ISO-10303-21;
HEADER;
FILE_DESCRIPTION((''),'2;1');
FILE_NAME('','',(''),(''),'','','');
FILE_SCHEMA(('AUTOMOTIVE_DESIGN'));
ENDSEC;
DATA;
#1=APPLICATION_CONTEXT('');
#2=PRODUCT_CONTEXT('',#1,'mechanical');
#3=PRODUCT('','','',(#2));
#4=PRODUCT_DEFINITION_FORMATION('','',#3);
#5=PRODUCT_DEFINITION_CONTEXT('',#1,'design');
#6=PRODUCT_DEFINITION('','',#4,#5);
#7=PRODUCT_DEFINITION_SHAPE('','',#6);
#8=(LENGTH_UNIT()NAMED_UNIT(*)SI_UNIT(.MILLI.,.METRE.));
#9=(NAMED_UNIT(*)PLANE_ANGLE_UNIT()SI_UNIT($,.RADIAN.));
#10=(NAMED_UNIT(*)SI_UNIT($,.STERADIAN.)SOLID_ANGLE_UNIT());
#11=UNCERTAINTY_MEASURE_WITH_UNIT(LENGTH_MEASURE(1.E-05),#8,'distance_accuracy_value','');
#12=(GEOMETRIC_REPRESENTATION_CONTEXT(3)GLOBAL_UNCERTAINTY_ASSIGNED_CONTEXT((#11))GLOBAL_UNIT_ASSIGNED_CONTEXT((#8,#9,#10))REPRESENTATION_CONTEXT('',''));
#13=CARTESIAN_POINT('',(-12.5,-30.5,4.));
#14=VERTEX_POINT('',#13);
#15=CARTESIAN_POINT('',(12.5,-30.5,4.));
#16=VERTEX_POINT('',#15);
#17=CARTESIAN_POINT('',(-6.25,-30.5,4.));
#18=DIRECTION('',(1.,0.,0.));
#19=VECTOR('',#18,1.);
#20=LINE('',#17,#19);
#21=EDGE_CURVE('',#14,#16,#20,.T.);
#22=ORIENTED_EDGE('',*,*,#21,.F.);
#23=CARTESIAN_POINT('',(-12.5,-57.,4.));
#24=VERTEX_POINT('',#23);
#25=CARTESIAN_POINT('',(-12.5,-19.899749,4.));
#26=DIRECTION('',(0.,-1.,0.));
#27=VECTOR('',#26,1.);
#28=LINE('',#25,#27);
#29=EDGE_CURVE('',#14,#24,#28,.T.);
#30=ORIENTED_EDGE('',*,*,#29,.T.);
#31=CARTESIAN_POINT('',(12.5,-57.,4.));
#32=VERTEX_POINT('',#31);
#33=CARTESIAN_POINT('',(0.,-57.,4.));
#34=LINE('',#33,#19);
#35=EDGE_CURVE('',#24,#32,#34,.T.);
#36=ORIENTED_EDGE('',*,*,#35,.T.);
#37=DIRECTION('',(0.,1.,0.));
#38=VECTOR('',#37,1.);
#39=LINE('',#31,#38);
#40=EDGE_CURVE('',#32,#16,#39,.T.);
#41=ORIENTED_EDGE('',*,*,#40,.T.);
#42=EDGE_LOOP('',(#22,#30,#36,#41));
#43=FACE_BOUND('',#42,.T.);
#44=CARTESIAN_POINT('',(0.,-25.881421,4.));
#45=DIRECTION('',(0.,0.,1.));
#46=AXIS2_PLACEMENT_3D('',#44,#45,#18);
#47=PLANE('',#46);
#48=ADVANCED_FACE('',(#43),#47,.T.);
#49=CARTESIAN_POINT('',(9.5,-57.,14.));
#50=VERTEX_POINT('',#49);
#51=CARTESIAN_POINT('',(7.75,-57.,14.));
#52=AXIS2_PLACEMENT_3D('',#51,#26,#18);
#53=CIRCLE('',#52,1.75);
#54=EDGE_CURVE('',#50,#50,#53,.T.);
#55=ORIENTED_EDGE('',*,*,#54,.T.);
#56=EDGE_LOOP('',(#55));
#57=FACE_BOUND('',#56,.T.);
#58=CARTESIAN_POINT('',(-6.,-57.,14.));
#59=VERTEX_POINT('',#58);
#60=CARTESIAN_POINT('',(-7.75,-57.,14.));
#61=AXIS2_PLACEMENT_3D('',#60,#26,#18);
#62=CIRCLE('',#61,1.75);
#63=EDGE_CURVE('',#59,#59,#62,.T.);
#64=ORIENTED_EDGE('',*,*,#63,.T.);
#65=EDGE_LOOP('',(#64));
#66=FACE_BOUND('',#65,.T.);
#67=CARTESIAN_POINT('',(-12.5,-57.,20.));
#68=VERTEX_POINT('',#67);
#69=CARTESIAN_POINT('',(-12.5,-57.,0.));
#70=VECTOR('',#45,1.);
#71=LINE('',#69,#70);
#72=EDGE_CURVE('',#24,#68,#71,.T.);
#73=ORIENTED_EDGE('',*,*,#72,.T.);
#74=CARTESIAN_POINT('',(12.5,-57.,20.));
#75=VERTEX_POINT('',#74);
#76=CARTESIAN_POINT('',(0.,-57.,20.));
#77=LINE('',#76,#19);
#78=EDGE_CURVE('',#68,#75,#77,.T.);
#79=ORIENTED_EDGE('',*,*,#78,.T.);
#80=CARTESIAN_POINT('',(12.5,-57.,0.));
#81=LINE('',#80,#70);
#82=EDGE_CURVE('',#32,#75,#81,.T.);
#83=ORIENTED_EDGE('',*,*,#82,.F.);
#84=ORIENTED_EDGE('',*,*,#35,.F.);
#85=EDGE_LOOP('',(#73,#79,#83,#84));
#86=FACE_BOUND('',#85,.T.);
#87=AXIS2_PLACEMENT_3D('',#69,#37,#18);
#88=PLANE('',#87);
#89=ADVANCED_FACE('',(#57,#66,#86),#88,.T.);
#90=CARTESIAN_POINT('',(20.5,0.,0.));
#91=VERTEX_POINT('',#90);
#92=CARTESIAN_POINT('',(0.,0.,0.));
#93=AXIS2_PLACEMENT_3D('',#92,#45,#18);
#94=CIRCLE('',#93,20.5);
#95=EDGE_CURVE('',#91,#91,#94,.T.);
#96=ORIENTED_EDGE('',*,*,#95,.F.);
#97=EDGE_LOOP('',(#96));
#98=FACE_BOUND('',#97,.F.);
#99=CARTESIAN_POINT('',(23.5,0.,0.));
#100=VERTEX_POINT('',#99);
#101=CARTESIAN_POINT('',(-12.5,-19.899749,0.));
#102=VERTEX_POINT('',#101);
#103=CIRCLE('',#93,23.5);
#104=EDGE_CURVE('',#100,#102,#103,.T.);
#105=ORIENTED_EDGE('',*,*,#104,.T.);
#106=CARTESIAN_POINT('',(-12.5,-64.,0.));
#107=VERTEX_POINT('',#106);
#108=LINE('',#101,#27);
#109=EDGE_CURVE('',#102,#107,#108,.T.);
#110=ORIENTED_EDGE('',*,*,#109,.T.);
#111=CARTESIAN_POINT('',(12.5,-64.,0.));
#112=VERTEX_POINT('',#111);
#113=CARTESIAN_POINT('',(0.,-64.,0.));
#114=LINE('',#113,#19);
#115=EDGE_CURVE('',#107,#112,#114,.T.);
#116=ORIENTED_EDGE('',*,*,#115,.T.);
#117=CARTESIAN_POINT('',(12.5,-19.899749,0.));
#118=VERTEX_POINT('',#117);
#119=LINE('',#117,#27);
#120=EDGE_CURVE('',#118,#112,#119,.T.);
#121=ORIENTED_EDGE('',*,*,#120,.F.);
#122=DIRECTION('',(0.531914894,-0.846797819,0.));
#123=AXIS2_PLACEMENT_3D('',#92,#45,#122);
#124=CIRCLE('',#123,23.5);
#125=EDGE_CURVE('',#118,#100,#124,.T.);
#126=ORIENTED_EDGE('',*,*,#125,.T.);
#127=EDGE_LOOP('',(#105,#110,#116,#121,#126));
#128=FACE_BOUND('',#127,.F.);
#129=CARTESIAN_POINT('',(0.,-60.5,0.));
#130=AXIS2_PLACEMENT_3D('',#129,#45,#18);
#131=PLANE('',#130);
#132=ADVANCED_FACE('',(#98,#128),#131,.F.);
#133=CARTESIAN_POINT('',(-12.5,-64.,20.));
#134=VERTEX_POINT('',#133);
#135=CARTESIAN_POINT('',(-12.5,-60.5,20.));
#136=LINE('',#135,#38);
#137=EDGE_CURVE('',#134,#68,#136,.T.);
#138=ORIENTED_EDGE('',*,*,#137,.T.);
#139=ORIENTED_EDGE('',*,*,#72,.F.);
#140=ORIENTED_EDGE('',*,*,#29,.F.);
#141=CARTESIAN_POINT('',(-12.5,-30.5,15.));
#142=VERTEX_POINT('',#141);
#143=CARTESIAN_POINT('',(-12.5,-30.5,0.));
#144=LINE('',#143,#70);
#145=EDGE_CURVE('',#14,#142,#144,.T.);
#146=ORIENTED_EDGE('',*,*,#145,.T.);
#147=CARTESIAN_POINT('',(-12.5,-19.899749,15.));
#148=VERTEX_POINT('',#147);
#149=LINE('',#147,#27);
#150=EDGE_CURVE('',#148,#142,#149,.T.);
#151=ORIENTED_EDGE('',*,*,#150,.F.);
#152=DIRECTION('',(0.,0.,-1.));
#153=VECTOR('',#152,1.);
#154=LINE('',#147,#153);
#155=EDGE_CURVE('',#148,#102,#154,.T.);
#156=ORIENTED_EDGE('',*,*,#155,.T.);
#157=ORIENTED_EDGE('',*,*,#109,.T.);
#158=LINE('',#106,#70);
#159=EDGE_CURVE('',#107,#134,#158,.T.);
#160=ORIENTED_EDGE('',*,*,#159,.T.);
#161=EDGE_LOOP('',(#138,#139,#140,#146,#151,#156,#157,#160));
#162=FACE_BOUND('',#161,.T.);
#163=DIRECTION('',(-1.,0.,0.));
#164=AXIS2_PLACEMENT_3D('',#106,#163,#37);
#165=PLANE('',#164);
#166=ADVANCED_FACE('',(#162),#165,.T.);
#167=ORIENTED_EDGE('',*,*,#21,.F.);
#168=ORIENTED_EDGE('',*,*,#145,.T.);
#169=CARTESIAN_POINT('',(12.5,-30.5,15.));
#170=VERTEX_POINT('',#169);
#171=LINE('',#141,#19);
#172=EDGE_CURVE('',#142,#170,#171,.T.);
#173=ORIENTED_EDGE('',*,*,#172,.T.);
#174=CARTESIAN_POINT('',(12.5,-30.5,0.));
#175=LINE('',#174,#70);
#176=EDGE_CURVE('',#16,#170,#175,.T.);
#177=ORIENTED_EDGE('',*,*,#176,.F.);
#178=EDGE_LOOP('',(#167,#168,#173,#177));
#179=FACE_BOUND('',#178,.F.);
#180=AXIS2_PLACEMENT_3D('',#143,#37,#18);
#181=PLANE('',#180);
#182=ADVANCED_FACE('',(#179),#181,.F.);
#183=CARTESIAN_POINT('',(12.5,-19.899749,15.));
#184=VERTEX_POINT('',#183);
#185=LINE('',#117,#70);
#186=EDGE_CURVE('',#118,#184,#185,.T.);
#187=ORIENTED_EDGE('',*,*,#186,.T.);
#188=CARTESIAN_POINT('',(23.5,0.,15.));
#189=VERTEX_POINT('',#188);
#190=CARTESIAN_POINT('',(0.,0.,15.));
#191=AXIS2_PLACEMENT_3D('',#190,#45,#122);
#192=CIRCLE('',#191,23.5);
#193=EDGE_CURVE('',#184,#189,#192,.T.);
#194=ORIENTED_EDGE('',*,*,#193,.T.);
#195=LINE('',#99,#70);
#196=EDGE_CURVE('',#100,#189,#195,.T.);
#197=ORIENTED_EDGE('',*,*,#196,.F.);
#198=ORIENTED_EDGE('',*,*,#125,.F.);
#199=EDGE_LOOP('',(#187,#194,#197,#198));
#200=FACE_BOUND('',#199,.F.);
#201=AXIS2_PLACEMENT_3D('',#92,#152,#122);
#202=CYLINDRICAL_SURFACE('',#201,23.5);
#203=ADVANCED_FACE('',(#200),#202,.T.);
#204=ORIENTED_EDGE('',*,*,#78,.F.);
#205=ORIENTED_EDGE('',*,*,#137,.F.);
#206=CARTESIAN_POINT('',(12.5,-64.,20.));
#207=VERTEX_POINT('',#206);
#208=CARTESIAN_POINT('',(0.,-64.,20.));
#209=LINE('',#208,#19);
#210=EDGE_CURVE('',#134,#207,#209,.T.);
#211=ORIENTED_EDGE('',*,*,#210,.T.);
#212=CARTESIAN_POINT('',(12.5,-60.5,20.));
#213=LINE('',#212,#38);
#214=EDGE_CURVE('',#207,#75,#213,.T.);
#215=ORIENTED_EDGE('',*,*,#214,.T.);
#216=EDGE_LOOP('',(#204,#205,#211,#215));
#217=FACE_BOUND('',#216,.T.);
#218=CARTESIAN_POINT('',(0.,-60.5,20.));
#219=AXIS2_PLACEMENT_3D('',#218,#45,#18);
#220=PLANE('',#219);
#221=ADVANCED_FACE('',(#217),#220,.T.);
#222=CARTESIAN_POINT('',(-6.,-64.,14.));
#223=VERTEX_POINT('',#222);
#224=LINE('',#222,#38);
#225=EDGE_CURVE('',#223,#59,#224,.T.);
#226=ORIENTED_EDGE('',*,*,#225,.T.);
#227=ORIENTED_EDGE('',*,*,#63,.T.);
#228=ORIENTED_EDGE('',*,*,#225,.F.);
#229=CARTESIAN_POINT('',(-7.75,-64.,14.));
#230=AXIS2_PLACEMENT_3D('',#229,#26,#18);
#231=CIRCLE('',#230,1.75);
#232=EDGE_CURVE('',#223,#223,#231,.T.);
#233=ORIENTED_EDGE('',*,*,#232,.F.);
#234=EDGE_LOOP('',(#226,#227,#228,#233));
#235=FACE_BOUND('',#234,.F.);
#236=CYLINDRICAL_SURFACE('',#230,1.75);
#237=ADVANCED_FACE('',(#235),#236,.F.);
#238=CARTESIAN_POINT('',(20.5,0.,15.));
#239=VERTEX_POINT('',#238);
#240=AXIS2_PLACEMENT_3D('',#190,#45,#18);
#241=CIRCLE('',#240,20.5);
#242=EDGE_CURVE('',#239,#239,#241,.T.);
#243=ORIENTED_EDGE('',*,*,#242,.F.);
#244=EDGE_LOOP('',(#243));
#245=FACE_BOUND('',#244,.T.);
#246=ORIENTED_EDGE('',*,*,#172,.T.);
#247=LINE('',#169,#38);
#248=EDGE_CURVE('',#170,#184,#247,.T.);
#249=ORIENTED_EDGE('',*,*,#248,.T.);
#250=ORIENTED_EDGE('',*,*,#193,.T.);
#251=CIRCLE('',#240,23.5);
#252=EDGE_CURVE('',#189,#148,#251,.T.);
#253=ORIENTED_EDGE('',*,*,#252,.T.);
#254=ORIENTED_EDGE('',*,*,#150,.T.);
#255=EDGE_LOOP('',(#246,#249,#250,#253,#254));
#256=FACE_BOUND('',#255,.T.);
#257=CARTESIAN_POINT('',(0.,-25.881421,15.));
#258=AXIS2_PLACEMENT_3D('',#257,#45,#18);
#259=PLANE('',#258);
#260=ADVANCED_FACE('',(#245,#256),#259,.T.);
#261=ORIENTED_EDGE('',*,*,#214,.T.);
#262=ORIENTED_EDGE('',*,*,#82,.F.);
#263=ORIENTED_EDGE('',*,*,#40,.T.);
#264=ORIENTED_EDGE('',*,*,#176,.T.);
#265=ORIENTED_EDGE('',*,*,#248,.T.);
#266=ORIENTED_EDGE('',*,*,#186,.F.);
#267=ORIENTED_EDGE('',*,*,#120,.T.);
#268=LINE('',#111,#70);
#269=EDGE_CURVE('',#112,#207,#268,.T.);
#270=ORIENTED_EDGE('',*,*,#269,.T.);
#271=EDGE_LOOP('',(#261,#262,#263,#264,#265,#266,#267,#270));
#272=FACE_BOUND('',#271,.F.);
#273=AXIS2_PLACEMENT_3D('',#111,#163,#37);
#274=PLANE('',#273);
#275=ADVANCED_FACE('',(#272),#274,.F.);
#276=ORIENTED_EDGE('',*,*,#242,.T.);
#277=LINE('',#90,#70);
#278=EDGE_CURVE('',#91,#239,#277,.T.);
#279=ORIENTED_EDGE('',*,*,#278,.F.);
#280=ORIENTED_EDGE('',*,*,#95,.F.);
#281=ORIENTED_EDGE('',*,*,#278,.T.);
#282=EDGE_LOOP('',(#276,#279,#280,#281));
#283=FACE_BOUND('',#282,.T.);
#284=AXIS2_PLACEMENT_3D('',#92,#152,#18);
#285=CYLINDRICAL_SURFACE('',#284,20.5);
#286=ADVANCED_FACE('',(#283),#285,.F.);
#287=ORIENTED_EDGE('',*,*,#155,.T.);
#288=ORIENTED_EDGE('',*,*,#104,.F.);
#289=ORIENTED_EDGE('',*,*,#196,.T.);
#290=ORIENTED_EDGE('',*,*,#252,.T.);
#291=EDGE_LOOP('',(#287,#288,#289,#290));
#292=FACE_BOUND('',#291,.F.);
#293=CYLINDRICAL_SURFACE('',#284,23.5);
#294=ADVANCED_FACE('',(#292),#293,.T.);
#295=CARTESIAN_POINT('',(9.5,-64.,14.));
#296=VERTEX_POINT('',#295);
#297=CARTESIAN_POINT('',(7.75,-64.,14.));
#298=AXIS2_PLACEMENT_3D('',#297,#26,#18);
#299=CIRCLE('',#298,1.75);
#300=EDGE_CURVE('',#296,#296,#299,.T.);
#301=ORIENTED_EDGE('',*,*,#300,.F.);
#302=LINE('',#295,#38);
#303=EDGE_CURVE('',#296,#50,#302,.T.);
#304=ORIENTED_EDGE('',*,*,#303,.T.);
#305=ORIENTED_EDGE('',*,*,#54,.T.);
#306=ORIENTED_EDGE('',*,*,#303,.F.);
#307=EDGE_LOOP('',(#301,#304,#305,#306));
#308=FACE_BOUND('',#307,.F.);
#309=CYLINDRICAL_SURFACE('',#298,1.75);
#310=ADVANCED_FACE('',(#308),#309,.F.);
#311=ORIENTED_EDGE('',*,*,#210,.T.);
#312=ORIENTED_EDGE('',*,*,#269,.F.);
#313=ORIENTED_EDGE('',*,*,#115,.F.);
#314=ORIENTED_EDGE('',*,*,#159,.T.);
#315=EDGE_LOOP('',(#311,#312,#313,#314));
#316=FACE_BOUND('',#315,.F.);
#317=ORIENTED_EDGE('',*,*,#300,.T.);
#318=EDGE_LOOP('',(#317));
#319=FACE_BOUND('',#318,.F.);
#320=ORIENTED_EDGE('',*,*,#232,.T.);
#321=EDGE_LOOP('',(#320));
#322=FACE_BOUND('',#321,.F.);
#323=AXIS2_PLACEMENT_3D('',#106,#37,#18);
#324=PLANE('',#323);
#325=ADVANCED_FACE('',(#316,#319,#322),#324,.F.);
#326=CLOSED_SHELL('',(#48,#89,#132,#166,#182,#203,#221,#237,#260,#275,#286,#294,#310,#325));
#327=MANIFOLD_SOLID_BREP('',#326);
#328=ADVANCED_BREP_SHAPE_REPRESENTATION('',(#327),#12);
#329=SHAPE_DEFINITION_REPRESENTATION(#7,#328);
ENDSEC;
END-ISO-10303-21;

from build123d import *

# Parameters (mm, degrees)
F0_R     = 20.5
F1_DEPTH = 15
F0_W     = 25
F0_H     = 26.5
F2_DEPTH = 4
F0_H_2   = 7
F3_DEPTH = 20
F4_R     = 1.75
F5_DEPTH = 7


# Not quite as in the source:
# - a feature names something its author has since deleted; it is built from what else it names


with BuildPart() as f1:
    # F0 (on Top) → F1 (new body)
    with BuildSketch(Plane.XY):
        with BuildLine():
            ThreePointArc((12.5, -19.8997487421), (0, -23.5), (-12.5, -19.8997487421))
            Line((-12.5, -19.8997487421), (-12.5, -30.5))
            Line((-12.5, -30.5), (12.5, -30.5))
            Line((12.5, -30.5), (12.5, -19.8997487421))
        make_face()
        with BuildLine():
            ThreePointArc((23.5, 0), (-11.3688170009, 20.5669638012), (-12.5, -19.8997487421))
            ThreePointArc((-12.5, -19.8997487421), (0, -23.5), (12.5, -19.8997487421))
            ThreePointArc((12.5, -19.8997487421), (20.5669638012, -11.3688170009), (23.5, 0))
        make_face()
        Circle(F0_R, mode=Mode.SUBTRACT)
    extrude(amount=F1_DEPTH)

    # F0 (on Top) → F2 (join)
    with BuildSketch(Plane.XY):
        with BuildLine():
            ThreePointArc((12.5, -19.8997487421), (0, -23.5), (-12.5, -19.8997487421))
            Line((-12.5, -19.8997487421), (-12.5, -30.5))
            Line((-12.5, -30.5), (12.5, -30.5))
            Line((12.5, -30.5), (12.5, -19.8997487421))
        make_face()
        with Locations((0, -43.75)):
            Rectangle(F0_W, F0_H)
    extrude(amount=F2_DEPTH)

    # F0 (on Top) → F3 (join)
    with BuildSketch(Plane.XY):
        with Locations((0, -60.5)):
            Rectangle(F0_W, F0_H_2)
    extrude(amount=F3_DEPTH)

    # F4 (on face) → F5 (cut, through all)
    with BuildSketch(Plane.XZ.offset(64)):
        with Locations((-7.75, 14)):
            Circle(F4_R)
        with Locations((7.75, 14)):
            Circle(F4_R)
    extrude(amount=-F5_DEPTH, mode=Mode.SUBTRACT)


solid = f1.part
